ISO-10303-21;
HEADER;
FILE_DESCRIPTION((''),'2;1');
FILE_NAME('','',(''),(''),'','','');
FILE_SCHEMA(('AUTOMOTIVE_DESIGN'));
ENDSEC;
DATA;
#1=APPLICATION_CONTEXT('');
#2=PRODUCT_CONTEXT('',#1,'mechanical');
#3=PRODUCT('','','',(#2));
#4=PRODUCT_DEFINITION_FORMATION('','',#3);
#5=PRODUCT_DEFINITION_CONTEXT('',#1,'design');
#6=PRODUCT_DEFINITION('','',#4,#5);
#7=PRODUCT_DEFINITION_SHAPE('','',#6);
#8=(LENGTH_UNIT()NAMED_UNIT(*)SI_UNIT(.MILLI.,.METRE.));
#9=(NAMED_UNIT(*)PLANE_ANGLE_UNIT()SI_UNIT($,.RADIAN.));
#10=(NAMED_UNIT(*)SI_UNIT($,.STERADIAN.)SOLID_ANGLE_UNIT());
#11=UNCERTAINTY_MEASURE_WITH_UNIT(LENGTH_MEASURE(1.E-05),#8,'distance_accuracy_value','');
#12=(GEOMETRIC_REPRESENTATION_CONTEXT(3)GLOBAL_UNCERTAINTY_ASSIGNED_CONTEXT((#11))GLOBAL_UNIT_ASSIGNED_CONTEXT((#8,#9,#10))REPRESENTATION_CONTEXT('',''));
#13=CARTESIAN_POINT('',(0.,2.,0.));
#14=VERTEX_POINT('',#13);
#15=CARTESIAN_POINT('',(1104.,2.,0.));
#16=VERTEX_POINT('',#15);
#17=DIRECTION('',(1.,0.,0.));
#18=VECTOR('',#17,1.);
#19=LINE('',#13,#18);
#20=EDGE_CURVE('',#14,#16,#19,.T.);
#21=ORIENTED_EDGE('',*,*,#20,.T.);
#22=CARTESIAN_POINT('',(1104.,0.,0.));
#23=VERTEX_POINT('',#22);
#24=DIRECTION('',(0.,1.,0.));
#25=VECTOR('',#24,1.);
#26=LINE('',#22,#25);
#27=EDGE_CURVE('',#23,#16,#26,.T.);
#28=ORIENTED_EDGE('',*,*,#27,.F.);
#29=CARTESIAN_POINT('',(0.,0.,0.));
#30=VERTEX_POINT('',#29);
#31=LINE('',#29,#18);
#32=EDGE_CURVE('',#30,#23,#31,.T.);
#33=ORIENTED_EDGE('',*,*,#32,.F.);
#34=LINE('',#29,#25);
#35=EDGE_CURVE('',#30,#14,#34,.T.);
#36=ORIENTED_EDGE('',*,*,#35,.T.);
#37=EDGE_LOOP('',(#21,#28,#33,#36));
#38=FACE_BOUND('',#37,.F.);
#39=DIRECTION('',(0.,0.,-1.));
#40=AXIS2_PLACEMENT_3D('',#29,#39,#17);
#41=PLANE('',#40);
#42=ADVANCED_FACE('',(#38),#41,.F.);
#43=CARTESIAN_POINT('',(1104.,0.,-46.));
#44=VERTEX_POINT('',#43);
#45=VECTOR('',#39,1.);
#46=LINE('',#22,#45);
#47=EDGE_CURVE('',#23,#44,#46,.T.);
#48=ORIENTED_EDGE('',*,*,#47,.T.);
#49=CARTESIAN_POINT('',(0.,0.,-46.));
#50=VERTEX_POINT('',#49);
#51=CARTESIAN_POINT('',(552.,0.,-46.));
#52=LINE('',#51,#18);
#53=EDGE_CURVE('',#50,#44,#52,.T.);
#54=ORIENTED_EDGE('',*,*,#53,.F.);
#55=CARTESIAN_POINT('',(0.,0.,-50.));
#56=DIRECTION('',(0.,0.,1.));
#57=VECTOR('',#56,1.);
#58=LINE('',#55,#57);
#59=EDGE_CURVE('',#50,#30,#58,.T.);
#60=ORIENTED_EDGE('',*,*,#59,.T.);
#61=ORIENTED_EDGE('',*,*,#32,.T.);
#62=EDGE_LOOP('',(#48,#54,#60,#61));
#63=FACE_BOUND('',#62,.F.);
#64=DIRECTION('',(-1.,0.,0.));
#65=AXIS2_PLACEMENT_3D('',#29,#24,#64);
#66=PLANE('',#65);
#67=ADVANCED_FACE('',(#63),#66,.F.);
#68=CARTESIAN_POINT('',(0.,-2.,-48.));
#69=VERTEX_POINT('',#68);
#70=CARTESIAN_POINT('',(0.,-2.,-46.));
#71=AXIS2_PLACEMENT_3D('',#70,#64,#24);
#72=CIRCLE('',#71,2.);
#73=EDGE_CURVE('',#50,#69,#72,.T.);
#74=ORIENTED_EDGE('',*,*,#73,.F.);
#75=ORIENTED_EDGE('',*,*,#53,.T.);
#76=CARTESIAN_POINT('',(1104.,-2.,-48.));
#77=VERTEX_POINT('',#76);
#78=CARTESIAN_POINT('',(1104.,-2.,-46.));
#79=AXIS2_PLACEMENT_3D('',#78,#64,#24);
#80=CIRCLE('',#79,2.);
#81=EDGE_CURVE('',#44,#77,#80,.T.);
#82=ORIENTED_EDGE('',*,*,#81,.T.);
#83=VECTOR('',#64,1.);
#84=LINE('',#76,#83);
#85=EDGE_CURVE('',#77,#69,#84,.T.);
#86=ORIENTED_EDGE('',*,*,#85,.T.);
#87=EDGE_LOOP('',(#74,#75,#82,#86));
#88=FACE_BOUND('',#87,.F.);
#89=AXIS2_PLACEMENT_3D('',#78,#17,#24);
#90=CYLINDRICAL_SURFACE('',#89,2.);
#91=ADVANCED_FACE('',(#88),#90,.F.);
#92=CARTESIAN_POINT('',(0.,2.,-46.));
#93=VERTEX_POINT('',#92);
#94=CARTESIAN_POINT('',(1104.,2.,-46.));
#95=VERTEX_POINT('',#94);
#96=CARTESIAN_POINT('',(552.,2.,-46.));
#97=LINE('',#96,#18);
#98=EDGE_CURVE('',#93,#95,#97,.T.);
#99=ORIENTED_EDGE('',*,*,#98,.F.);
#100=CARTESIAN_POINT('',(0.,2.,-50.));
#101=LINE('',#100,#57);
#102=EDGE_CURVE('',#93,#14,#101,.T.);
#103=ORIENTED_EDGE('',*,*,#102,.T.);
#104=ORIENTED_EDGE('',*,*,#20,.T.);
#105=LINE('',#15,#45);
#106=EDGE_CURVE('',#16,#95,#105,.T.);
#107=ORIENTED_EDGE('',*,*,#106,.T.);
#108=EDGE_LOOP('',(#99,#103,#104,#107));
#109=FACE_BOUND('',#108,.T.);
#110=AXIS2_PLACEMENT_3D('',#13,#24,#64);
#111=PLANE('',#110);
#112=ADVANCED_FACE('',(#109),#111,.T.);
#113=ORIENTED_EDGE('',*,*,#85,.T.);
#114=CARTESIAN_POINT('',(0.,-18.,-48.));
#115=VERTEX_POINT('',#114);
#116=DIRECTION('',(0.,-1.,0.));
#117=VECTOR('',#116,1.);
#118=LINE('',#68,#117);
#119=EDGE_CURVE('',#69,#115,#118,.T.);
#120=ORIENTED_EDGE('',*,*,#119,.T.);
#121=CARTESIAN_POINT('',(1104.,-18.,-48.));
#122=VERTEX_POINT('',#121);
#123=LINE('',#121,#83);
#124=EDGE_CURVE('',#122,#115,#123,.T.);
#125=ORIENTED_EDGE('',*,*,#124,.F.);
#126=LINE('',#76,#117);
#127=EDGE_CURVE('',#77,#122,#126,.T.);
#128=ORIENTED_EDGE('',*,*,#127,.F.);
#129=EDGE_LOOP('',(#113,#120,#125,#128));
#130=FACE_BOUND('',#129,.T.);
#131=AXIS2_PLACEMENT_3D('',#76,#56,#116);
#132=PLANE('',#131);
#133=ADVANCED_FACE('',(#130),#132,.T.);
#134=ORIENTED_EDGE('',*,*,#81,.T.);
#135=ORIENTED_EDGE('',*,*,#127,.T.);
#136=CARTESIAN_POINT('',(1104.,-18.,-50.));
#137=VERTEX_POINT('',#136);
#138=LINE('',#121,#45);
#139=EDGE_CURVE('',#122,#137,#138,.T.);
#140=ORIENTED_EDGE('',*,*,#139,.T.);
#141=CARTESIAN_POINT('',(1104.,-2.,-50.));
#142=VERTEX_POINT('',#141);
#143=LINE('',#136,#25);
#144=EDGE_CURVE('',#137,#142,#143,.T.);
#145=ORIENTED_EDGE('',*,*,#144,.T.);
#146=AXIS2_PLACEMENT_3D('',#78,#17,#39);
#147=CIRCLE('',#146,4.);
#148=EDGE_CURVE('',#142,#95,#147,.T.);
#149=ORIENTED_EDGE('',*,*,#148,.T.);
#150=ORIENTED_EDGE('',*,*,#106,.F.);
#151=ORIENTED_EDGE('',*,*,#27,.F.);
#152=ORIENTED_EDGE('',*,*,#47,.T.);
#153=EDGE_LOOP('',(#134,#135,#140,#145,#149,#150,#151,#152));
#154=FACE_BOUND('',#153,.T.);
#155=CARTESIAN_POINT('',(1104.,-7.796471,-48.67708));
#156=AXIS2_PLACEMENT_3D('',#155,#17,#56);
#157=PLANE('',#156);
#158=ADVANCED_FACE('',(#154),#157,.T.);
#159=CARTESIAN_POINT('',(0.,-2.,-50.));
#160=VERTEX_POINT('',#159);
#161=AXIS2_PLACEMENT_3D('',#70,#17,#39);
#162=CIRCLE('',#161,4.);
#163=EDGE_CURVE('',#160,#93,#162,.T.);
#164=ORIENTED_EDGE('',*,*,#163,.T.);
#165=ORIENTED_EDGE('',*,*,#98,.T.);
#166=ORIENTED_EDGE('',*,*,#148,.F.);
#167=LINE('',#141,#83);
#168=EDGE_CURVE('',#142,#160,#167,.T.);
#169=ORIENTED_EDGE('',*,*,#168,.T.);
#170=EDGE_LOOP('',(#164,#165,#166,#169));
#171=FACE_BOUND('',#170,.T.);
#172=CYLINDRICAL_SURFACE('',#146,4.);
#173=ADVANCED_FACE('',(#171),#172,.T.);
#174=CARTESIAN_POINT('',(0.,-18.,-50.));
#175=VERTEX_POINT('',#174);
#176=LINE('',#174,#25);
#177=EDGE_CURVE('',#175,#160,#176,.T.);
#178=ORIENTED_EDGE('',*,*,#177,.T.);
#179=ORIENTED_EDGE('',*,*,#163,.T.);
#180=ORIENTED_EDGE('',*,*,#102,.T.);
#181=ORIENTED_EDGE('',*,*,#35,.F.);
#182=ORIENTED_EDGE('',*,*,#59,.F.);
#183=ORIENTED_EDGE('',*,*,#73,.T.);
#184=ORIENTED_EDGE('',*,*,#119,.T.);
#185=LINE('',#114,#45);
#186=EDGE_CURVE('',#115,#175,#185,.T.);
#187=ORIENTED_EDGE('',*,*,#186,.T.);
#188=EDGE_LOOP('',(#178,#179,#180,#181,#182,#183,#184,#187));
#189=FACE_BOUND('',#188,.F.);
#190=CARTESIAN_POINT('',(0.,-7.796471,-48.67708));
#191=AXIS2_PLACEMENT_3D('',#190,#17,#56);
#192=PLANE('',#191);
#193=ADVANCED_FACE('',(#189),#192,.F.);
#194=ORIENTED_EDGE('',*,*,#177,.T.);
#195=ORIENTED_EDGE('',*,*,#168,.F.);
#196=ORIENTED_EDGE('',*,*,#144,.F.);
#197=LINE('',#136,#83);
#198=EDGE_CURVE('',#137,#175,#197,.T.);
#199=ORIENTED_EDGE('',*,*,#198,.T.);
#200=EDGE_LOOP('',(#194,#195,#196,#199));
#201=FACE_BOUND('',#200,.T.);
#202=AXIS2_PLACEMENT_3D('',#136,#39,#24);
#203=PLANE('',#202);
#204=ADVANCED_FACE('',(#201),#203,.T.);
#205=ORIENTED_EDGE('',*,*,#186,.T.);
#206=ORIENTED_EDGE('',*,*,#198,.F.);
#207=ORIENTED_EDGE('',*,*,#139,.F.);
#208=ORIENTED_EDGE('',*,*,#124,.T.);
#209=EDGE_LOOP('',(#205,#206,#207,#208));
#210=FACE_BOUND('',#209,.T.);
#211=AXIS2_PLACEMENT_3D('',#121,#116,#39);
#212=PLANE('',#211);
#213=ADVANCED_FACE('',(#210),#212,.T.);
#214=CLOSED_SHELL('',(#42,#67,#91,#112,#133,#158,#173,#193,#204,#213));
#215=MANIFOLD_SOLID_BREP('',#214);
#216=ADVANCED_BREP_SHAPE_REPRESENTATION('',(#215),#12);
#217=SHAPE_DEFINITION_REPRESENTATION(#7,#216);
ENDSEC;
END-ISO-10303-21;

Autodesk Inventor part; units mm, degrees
ref_plane "YZ Plane" through (0, 0, 0) normal (1, 0, 0) x (0, 1, 0)
ref_plane "XZ Plane" through (0, 0, 0) normal (0, 1, 0) x (-1, 0, 0)
ref_plane "XY Plane" through (0, 0, 0) normal (0, 0, 1) x (1, 0, 0)
sketch "Sketch3" plane through (0, 0, 0) normal (0, 1, 0) x (-1, 0, 0)
  line L0 (0, 0) -> (-1104, 0)
  line L1 (-1104, 0) -> (-1104, -50)
  line L2 (-1104, -50) -> (0, -50)
  line L3 (0, -50) -> (0, 0)
  dimension "d25" = 50
  dimension "d28" = 1104
extrude "Plate3" add sketch "Sketch3" along normal blind 2
sketch "Sketch4" plane through (1104, 2, -48) normal (0, 0, -1) x (-1, 0, 0)
  line L0 (1104, 0) -> (0, 0)
  line L1 (0, 0) -> (0, -20)
  line L2 (0, -20) -> (1104, -20)
  line L3 (1104, -20) -> (1104, 0)
edge flange "Flange2" height 20 angle 90 thickness 2 bend radius 2 thickness toward (0, 0, -1) relief tear relief width 2 relief depth 1 edges at (552, 0, -50) wall of the first edge with corners at (0, 2, -48) (1104, 2, -48) (1104, -18, -48) (0, -18, -48)
bend "Bend3"
corner "Corner3"
equation "\"d30\" = Thickness"
equation "\"d31\" = BendReliefWidth"
equation "\"d32\" = BendReliefDepth"
equation "\"d33\" = MinimumRemnant"
equation "\"d34\" = TransitionRadius"
equation "\"d37\" = BendRadius"
equation "\"d38\" = CornerReliefSize"
equation "\"d39\" = GapSize"
equation "\"d40\" = JacobiRadiusSize"
equation "\"BendRadius\" = Thickness"
equation "\"BendReliefWidth\" = Thickness"
equation "\"BendReliefDepth\" = 0.5 * Thickness"
equation "\"CornerReliefSize\" = 4 * Thickness"
equation "\"MinimumRemnant\" = 2 * Thickness"
equation "\"TransitionRadius\" = BendRadius"
equation "\"JacobiRadiusSize\" = BendRadius"
equation "\"GapSize\" = Thickness"
equation "\"Thickness\" = 2"
properties part number "GBK-RK-0043 rib 3"
